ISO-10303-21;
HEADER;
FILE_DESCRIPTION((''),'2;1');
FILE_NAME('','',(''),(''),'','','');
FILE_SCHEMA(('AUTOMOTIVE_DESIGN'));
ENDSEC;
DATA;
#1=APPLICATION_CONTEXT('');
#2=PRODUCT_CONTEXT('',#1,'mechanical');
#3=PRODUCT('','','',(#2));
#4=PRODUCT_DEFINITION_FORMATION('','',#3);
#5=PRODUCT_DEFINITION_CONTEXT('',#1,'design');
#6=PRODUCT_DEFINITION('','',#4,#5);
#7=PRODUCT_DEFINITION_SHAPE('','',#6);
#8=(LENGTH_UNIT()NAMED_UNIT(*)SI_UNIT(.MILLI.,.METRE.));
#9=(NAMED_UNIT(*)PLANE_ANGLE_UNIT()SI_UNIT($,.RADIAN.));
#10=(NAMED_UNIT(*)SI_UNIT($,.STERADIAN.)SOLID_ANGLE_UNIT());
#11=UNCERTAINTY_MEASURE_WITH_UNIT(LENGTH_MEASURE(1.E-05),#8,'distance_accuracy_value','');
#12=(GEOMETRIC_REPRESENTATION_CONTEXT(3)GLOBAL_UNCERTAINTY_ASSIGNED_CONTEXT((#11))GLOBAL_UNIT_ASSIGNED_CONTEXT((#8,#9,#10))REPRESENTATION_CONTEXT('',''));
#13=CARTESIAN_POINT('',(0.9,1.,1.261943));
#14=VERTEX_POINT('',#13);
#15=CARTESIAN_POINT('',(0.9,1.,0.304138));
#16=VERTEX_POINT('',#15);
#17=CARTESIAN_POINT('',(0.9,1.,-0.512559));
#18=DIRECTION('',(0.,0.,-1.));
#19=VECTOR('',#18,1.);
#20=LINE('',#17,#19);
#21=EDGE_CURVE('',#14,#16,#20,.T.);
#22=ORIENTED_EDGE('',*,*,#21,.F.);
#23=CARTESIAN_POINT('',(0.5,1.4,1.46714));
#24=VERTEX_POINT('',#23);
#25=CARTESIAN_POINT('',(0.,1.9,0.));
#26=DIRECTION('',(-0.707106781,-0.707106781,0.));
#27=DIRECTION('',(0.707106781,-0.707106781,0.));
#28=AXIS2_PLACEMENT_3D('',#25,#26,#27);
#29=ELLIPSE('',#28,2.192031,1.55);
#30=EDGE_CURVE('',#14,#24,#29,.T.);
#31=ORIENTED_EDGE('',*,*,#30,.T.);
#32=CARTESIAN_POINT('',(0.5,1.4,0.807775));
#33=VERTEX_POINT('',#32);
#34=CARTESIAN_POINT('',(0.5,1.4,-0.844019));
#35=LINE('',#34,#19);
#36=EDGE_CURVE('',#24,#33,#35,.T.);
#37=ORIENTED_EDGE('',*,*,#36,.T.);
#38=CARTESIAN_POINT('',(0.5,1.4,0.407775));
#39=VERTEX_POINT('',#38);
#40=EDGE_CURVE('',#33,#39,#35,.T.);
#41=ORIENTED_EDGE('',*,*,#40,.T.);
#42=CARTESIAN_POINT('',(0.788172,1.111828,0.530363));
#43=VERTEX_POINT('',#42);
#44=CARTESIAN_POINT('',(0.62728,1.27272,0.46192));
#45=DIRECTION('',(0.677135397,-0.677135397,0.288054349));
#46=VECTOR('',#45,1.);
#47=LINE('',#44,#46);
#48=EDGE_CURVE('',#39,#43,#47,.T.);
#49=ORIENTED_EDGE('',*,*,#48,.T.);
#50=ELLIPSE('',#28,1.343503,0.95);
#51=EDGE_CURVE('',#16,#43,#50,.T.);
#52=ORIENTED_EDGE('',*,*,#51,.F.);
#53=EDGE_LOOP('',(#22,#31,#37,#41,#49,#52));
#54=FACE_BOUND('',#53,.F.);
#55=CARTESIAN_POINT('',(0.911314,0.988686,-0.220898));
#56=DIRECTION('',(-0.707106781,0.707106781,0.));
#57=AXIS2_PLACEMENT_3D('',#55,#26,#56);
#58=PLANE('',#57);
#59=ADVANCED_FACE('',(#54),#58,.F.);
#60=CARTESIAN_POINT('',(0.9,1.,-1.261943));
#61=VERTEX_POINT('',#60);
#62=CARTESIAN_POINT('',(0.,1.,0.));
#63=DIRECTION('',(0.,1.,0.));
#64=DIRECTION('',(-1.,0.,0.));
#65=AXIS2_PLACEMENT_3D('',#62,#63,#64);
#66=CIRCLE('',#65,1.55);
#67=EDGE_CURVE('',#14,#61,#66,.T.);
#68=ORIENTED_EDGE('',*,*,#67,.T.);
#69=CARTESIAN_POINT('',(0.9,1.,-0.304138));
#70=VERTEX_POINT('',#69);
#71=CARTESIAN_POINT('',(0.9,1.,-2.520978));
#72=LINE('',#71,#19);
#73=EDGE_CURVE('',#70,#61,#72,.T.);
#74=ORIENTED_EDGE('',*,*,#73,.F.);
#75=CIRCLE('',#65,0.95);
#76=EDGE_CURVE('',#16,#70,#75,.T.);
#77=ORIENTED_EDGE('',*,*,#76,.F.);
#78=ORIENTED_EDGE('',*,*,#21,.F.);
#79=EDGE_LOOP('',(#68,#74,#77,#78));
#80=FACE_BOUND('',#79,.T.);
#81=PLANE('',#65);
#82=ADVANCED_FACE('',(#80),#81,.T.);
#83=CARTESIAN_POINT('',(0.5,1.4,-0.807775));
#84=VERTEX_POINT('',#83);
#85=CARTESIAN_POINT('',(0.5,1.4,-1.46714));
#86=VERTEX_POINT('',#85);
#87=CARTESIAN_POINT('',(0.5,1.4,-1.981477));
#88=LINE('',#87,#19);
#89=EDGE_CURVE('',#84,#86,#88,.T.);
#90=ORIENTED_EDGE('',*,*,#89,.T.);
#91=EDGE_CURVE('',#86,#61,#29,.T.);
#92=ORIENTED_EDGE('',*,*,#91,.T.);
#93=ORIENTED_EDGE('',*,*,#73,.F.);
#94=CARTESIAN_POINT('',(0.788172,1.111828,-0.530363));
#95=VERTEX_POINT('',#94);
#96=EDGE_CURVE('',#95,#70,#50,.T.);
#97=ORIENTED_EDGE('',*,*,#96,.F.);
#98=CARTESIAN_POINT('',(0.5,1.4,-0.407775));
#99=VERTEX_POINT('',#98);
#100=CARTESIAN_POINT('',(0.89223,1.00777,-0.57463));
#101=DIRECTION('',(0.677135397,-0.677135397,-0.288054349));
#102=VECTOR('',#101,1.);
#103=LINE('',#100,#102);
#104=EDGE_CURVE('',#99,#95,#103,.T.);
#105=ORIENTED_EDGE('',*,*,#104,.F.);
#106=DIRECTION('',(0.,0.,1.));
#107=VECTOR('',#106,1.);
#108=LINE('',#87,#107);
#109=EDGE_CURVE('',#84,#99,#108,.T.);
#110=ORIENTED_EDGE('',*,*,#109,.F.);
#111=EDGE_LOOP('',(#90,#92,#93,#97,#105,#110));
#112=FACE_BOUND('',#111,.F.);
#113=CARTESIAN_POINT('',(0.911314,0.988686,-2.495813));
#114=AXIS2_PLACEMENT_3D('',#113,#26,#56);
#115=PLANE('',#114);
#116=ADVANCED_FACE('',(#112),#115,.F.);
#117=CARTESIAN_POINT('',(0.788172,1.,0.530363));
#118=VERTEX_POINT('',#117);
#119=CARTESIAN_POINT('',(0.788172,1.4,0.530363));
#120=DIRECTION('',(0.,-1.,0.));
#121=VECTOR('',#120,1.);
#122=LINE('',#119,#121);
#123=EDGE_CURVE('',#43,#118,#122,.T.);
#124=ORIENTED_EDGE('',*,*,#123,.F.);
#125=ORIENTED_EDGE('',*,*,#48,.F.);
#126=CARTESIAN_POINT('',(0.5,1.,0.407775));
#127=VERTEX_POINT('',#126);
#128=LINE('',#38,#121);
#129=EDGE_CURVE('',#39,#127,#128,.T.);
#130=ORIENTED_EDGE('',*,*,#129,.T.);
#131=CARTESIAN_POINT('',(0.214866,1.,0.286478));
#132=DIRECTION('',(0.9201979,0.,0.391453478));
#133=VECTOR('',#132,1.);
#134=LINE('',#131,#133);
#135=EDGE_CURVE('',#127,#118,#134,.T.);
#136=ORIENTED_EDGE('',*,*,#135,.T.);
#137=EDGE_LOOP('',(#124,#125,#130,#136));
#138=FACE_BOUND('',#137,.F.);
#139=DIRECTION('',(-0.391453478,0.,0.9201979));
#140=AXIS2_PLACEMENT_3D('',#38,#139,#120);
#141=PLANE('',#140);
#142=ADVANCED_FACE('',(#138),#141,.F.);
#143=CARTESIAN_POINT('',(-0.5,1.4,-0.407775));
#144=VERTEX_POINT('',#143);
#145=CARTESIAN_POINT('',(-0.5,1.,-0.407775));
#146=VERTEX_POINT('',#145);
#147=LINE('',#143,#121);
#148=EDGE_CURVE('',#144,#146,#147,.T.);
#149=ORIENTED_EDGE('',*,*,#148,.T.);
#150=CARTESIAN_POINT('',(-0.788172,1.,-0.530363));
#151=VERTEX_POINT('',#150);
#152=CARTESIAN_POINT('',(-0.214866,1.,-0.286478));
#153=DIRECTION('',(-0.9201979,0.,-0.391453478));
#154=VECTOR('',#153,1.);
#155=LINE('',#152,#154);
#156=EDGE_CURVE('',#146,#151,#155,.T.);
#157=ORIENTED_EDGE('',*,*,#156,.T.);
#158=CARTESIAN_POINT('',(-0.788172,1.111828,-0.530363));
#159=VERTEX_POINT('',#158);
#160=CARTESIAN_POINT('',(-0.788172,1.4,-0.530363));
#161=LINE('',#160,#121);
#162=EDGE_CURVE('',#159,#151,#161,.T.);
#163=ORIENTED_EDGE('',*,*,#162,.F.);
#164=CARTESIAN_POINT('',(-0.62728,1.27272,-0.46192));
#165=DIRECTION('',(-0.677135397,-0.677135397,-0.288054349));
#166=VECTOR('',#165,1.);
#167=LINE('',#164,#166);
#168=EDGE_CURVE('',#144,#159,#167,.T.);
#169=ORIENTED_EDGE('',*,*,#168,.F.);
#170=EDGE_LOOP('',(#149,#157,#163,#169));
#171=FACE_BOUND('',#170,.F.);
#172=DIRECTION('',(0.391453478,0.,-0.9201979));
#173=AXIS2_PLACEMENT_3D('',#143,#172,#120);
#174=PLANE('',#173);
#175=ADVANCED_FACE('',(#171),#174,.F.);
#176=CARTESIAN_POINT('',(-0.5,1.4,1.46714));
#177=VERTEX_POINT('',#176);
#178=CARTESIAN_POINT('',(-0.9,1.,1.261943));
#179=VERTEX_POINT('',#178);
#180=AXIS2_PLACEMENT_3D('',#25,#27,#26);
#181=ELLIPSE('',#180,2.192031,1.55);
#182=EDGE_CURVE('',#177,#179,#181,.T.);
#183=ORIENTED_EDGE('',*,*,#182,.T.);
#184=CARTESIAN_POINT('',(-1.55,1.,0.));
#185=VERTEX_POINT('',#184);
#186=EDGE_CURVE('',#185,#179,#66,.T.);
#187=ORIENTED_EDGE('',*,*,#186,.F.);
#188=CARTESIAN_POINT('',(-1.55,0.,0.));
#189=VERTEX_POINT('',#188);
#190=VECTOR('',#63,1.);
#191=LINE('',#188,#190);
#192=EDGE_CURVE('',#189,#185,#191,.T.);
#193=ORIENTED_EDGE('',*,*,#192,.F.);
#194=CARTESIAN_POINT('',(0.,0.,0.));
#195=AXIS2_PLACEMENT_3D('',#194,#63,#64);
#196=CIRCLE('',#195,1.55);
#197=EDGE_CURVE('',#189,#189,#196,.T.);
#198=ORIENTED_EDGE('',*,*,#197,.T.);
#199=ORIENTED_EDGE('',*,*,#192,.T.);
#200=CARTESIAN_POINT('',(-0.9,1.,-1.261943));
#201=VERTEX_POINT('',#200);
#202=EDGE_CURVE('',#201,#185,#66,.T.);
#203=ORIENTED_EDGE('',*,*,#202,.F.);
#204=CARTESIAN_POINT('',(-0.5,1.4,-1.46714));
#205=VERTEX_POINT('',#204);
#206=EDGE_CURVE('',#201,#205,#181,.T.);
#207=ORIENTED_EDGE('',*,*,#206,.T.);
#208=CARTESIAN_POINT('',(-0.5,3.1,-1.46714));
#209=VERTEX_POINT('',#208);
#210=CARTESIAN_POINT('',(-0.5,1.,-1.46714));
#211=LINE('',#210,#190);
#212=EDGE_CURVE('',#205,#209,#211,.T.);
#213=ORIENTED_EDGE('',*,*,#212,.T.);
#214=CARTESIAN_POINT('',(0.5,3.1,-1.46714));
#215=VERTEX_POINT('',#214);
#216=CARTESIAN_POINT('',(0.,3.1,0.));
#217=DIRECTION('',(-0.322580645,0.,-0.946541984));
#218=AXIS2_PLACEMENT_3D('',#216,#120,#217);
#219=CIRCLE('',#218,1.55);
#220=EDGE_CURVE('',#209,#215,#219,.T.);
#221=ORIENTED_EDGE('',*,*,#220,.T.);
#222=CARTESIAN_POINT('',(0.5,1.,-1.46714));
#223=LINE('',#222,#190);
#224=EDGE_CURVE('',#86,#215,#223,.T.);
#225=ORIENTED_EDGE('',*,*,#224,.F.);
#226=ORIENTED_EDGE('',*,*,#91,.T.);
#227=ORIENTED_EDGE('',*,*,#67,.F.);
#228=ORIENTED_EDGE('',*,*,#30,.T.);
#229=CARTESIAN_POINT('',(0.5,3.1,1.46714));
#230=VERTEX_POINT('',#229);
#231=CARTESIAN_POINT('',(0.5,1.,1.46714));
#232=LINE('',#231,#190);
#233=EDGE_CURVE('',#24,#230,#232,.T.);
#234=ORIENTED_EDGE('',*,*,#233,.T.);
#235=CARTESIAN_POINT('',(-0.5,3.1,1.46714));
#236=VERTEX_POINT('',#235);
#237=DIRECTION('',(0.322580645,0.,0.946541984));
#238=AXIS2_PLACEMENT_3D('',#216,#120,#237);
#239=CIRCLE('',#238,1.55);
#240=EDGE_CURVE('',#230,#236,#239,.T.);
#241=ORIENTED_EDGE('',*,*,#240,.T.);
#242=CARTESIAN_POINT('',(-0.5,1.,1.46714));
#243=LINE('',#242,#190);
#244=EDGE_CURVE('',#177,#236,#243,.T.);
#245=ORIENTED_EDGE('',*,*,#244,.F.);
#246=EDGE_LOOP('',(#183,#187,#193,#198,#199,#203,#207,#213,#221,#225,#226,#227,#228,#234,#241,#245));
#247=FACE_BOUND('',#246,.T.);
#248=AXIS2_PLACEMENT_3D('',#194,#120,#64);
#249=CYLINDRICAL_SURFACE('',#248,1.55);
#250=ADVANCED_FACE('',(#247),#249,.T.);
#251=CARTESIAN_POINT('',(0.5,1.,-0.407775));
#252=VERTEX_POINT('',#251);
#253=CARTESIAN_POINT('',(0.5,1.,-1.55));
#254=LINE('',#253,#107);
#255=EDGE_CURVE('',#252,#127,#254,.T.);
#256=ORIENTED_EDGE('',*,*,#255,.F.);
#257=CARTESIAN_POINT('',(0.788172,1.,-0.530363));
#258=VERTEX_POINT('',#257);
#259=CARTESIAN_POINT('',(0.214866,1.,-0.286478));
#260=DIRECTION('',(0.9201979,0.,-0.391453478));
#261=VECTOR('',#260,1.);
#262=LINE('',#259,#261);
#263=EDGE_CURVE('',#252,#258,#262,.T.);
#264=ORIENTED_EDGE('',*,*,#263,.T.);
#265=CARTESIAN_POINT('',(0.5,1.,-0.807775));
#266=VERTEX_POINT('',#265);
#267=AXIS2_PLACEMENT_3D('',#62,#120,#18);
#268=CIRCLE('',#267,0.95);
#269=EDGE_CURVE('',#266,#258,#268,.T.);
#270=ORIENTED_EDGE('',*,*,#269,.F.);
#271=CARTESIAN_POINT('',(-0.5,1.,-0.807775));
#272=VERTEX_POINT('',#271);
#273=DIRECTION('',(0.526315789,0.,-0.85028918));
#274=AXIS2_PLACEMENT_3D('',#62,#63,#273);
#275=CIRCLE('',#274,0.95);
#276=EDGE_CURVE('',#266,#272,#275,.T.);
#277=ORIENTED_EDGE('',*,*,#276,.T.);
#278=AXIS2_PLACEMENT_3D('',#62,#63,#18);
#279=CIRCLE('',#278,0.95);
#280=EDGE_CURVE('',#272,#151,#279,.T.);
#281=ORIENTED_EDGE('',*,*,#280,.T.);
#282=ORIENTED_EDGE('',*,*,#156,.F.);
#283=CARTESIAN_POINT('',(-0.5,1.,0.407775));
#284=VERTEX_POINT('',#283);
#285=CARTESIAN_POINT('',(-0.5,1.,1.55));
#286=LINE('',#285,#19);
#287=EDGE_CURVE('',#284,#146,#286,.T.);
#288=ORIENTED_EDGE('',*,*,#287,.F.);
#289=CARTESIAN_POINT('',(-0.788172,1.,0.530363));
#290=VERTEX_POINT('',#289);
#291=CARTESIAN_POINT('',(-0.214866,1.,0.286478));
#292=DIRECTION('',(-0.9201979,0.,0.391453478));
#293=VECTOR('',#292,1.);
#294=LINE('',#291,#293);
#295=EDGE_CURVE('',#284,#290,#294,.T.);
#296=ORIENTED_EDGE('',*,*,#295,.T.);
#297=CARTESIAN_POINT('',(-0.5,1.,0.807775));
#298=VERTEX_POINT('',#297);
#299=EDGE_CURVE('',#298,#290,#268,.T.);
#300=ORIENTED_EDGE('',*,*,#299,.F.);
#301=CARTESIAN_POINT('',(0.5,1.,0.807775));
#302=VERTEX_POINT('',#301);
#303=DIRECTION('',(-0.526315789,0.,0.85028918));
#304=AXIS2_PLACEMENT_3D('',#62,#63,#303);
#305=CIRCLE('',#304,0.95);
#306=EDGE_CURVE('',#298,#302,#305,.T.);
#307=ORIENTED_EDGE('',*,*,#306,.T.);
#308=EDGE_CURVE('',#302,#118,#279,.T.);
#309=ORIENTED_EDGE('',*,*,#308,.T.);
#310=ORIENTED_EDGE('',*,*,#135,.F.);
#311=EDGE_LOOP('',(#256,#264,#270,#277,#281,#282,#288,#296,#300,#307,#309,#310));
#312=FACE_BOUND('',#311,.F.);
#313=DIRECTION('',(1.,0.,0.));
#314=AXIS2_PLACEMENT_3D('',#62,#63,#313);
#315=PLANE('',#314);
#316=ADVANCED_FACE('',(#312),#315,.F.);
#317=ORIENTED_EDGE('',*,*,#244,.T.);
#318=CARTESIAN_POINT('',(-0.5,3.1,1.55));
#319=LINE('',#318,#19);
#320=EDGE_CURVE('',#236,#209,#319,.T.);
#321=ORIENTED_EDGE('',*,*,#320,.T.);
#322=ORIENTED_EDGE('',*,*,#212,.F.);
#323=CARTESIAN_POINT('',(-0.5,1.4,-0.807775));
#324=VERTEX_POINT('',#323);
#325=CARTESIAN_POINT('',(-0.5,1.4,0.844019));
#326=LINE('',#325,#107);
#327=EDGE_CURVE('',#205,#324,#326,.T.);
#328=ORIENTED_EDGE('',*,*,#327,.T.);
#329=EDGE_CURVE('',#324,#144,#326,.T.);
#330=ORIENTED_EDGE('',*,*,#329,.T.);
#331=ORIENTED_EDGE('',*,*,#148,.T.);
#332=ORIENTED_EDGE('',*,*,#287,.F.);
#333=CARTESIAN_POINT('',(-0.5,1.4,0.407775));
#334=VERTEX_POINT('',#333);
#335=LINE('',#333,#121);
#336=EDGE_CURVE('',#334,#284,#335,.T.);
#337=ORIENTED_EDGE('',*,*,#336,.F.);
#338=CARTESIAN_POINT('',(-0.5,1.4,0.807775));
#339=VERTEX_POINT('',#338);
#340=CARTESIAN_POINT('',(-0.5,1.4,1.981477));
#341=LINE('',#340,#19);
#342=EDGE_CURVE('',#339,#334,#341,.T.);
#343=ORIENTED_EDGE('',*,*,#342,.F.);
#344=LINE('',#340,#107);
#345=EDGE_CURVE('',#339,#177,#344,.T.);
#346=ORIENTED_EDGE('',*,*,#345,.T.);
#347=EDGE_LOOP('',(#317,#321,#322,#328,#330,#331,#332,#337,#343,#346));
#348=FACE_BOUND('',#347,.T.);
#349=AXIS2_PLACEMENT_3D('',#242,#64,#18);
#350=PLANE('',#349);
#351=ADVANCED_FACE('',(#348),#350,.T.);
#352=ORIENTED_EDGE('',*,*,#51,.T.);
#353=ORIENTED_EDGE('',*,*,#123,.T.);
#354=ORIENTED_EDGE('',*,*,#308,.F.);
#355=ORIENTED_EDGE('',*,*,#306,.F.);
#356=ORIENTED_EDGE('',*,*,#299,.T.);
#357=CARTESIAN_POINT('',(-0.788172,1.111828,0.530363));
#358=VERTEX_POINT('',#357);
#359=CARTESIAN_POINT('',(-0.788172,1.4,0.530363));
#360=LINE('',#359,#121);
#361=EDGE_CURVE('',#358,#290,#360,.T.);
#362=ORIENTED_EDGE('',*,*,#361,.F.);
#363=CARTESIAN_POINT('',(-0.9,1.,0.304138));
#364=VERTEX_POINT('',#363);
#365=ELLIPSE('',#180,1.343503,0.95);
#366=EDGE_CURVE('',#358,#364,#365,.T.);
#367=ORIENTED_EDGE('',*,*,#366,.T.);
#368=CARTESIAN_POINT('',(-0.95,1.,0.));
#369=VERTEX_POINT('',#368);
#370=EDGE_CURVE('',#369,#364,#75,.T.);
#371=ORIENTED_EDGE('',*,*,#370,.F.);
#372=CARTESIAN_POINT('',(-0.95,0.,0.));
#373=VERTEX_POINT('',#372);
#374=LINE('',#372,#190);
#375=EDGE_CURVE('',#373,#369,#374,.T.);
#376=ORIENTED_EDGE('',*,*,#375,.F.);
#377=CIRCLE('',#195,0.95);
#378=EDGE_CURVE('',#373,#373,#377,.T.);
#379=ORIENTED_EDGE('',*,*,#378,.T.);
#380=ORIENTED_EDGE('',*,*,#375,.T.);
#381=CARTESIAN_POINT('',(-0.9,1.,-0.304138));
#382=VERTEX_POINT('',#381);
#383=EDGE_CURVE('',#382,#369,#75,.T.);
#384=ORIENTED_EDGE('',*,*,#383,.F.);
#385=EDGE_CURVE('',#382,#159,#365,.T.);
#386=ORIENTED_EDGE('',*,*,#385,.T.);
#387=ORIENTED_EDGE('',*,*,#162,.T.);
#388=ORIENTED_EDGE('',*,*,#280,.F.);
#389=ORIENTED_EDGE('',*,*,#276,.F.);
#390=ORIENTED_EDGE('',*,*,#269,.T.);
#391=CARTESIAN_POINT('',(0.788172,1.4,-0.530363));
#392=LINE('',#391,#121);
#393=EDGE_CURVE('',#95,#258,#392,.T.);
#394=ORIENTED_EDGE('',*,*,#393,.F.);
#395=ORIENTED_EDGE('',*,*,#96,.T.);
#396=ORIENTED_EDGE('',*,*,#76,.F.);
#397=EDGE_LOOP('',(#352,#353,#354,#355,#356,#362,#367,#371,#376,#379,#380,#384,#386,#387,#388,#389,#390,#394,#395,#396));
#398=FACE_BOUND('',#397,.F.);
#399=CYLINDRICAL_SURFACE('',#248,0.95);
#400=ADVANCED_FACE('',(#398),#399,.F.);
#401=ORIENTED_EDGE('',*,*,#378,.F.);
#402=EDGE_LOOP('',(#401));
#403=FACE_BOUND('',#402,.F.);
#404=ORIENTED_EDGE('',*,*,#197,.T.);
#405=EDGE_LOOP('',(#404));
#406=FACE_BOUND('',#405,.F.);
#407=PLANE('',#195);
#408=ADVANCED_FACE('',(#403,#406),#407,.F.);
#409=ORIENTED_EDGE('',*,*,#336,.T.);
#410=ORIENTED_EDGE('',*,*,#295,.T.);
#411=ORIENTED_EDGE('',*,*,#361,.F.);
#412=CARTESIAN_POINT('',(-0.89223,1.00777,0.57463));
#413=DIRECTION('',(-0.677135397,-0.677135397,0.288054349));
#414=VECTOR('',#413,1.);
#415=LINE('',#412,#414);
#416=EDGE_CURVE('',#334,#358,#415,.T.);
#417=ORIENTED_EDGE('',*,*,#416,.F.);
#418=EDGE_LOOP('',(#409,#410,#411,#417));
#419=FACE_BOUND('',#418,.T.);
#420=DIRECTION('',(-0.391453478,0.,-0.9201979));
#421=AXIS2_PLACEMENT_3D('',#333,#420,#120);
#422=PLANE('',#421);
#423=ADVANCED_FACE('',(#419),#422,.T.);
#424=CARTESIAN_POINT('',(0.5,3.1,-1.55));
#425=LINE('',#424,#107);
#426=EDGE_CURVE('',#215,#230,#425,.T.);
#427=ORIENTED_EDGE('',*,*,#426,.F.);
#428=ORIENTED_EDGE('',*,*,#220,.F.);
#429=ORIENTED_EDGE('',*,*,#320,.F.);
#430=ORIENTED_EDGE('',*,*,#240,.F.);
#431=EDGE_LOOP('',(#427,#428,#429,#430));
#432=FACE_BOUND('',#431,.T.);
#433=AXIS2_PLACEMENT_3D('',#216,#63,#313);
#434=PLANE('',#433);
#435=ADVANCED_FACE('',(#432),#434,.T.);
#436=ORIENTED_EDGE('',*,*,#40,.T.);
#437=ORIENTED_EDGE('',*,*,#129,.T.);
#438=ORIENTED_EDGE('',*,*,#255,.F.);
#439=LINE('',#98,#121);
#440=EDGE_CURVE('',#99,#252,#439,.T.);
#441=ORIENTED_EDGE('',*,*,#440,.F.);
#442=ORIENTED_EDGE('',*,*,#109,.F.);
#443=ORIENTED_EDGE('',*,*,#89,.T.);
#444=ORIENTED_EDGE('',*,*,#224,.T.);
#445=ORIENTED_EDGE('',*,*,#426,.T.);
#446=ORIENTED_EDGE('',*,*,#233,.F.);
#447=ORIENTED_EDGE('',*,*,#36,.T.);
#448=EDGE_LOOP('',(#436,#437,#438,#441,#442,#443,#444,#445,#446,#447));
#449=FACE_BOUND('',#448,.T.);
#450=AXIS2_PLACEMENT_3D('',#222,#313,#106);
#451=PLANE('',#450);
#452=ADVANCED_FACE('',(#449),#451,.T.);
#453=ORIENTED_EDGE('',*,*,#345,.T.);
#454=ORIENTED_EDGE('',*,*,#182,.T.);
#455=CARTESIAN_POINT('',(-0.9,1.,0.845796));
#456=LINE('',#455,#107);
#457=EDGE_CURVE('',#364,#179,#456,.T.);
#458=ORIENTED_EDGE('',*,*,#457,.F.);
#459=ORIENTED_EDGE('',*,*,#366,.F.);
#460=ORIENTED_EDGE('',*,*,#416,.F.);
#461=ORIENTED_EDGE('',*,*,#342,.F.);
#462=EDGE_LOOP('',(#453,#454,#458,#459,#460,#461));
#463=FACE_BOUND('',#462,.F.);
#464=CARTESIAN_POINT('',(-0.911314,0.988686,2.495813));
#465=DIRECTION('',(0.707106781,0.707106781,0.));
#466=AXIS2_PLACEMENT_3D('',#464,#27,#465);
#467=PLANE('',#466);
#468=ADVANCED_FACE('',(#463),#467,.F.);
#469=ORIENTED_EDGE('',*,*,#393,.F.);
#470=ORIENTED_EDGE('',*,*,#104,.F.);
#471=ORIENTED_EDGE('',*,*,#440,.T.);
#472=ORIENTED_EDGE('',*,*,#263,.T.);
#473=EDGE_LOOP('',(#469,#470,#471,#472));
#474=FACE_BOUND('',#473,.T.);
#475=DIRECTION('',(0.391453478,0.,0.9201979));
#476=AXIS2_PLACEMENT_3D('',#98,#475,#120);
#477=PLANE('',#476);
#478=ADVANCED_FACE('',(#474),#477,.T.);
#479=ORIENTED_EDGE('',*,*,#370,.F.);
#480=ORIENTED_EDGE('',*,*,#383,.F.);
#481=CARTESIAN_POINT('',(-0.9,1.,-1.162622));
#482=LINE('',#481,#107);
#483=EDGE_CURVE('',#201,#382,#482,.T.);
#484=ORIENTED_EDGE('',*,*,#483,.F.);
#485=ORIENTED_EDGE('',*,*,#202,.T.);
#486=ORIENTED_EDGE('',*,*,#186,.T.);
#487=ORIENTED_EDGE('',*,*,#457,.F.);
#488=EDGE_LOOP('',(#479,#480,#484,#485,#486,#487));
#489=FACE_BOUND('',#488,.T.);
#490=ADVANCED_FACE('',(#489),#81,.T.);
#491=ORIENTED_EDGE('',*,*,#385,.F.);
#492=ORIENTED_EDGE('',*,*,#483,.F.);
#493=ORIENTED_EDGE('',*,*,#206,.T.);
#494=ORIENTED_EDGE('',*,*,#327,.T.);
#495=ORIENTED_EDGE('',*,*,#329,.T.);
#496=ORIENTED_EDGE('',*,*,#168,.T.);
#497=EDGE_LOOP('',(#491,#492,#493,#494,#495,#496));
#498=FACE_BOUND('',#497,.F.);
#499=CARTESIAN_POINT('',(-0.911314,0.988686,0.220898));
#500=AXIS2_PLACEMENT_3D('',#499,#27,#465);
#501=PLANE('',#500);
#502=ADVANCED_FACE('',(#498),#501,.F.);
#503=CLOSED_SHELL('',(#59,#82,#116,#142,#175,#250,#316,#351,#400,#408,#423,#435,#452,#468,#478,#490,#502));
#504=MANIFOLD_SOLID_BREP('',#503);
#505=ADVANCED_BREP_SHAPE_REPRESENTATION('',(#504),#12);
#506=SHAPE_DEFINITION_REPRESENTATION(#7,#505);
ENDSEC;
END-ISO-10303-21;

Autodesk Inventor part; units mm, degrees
ref_plane "YZ Plane" through (0, 0, 0) normal (1, 0, 0) x (0, 1, 0)
ref_plane "XZ Plane" through (0, 0, 0) normal (0, 1, 0) x (-1, 0, 0)
ref_plane "XY Plane" through (0, 0, 0) normal (0, 0, 1) x (1, 0, 0)
sketch "스케치2" plane through (0, 0, 0) normal (0, 1, 0) x (-1, 0, 0)
  circle A0 centre (0, 0) radius 1.55
  circle A1 centre (0, 0) radius 0.95
  dimension "d0" = 3.1
  dimension "d6" = 1.9
extrude "돌출1" add sketch "스케치2" along normal blind 1
sketch "스케치4" plane through (0, 1, 0) normal (0, 1, 0) x (1, 0, 0)
  line L0 (0.5, -1.55) -> (-0.5, -1.55)
  line L1 (-0.5, -1.55) -> (-0.5, 1.55)
  line L2 (-0.5, 1.55) -> (0.5, 1.55)
  line L3 (0.5, 1.55) -> (0.5, -1.55)
  line L4 (0.5, -1.55) -> (-0.5, 1.55) construction
  line L5 (-0.5, -1.55) -> (0.5, 1.55) construction
  circle A0 centre (0, 0) radius 1.55 projected
  point P0 (0.5, 1.4671)
  point P1 (-0.5, 1.4671)
  point P2 (-0.5, -1.4671)
  point P3 (0.5, -1.4671)
  dimension "d7" = 1
extrude "돌출3" add sketch "스케치4" along normal blind 2.1 contours A0 L1 L3
chamfer "모따기1" distance 0.4 angle 45 4 edges at (0.5, 1, 1.1375) (0.5, 1, -1.1375) (-0.5, 1, -1.1375) (-0.5, 1, 1.1375)
chamfer "모따기2" distance 0.4 angle 45 4 edges at (-0.5, 1.2, -0.8078) (-0.5, 1.2, 0.8078) (0.5, 1.2, 0.8078) (0.5, 1.2, -0.8078)
properties part number "bone_attachment_3.1mm_test"
